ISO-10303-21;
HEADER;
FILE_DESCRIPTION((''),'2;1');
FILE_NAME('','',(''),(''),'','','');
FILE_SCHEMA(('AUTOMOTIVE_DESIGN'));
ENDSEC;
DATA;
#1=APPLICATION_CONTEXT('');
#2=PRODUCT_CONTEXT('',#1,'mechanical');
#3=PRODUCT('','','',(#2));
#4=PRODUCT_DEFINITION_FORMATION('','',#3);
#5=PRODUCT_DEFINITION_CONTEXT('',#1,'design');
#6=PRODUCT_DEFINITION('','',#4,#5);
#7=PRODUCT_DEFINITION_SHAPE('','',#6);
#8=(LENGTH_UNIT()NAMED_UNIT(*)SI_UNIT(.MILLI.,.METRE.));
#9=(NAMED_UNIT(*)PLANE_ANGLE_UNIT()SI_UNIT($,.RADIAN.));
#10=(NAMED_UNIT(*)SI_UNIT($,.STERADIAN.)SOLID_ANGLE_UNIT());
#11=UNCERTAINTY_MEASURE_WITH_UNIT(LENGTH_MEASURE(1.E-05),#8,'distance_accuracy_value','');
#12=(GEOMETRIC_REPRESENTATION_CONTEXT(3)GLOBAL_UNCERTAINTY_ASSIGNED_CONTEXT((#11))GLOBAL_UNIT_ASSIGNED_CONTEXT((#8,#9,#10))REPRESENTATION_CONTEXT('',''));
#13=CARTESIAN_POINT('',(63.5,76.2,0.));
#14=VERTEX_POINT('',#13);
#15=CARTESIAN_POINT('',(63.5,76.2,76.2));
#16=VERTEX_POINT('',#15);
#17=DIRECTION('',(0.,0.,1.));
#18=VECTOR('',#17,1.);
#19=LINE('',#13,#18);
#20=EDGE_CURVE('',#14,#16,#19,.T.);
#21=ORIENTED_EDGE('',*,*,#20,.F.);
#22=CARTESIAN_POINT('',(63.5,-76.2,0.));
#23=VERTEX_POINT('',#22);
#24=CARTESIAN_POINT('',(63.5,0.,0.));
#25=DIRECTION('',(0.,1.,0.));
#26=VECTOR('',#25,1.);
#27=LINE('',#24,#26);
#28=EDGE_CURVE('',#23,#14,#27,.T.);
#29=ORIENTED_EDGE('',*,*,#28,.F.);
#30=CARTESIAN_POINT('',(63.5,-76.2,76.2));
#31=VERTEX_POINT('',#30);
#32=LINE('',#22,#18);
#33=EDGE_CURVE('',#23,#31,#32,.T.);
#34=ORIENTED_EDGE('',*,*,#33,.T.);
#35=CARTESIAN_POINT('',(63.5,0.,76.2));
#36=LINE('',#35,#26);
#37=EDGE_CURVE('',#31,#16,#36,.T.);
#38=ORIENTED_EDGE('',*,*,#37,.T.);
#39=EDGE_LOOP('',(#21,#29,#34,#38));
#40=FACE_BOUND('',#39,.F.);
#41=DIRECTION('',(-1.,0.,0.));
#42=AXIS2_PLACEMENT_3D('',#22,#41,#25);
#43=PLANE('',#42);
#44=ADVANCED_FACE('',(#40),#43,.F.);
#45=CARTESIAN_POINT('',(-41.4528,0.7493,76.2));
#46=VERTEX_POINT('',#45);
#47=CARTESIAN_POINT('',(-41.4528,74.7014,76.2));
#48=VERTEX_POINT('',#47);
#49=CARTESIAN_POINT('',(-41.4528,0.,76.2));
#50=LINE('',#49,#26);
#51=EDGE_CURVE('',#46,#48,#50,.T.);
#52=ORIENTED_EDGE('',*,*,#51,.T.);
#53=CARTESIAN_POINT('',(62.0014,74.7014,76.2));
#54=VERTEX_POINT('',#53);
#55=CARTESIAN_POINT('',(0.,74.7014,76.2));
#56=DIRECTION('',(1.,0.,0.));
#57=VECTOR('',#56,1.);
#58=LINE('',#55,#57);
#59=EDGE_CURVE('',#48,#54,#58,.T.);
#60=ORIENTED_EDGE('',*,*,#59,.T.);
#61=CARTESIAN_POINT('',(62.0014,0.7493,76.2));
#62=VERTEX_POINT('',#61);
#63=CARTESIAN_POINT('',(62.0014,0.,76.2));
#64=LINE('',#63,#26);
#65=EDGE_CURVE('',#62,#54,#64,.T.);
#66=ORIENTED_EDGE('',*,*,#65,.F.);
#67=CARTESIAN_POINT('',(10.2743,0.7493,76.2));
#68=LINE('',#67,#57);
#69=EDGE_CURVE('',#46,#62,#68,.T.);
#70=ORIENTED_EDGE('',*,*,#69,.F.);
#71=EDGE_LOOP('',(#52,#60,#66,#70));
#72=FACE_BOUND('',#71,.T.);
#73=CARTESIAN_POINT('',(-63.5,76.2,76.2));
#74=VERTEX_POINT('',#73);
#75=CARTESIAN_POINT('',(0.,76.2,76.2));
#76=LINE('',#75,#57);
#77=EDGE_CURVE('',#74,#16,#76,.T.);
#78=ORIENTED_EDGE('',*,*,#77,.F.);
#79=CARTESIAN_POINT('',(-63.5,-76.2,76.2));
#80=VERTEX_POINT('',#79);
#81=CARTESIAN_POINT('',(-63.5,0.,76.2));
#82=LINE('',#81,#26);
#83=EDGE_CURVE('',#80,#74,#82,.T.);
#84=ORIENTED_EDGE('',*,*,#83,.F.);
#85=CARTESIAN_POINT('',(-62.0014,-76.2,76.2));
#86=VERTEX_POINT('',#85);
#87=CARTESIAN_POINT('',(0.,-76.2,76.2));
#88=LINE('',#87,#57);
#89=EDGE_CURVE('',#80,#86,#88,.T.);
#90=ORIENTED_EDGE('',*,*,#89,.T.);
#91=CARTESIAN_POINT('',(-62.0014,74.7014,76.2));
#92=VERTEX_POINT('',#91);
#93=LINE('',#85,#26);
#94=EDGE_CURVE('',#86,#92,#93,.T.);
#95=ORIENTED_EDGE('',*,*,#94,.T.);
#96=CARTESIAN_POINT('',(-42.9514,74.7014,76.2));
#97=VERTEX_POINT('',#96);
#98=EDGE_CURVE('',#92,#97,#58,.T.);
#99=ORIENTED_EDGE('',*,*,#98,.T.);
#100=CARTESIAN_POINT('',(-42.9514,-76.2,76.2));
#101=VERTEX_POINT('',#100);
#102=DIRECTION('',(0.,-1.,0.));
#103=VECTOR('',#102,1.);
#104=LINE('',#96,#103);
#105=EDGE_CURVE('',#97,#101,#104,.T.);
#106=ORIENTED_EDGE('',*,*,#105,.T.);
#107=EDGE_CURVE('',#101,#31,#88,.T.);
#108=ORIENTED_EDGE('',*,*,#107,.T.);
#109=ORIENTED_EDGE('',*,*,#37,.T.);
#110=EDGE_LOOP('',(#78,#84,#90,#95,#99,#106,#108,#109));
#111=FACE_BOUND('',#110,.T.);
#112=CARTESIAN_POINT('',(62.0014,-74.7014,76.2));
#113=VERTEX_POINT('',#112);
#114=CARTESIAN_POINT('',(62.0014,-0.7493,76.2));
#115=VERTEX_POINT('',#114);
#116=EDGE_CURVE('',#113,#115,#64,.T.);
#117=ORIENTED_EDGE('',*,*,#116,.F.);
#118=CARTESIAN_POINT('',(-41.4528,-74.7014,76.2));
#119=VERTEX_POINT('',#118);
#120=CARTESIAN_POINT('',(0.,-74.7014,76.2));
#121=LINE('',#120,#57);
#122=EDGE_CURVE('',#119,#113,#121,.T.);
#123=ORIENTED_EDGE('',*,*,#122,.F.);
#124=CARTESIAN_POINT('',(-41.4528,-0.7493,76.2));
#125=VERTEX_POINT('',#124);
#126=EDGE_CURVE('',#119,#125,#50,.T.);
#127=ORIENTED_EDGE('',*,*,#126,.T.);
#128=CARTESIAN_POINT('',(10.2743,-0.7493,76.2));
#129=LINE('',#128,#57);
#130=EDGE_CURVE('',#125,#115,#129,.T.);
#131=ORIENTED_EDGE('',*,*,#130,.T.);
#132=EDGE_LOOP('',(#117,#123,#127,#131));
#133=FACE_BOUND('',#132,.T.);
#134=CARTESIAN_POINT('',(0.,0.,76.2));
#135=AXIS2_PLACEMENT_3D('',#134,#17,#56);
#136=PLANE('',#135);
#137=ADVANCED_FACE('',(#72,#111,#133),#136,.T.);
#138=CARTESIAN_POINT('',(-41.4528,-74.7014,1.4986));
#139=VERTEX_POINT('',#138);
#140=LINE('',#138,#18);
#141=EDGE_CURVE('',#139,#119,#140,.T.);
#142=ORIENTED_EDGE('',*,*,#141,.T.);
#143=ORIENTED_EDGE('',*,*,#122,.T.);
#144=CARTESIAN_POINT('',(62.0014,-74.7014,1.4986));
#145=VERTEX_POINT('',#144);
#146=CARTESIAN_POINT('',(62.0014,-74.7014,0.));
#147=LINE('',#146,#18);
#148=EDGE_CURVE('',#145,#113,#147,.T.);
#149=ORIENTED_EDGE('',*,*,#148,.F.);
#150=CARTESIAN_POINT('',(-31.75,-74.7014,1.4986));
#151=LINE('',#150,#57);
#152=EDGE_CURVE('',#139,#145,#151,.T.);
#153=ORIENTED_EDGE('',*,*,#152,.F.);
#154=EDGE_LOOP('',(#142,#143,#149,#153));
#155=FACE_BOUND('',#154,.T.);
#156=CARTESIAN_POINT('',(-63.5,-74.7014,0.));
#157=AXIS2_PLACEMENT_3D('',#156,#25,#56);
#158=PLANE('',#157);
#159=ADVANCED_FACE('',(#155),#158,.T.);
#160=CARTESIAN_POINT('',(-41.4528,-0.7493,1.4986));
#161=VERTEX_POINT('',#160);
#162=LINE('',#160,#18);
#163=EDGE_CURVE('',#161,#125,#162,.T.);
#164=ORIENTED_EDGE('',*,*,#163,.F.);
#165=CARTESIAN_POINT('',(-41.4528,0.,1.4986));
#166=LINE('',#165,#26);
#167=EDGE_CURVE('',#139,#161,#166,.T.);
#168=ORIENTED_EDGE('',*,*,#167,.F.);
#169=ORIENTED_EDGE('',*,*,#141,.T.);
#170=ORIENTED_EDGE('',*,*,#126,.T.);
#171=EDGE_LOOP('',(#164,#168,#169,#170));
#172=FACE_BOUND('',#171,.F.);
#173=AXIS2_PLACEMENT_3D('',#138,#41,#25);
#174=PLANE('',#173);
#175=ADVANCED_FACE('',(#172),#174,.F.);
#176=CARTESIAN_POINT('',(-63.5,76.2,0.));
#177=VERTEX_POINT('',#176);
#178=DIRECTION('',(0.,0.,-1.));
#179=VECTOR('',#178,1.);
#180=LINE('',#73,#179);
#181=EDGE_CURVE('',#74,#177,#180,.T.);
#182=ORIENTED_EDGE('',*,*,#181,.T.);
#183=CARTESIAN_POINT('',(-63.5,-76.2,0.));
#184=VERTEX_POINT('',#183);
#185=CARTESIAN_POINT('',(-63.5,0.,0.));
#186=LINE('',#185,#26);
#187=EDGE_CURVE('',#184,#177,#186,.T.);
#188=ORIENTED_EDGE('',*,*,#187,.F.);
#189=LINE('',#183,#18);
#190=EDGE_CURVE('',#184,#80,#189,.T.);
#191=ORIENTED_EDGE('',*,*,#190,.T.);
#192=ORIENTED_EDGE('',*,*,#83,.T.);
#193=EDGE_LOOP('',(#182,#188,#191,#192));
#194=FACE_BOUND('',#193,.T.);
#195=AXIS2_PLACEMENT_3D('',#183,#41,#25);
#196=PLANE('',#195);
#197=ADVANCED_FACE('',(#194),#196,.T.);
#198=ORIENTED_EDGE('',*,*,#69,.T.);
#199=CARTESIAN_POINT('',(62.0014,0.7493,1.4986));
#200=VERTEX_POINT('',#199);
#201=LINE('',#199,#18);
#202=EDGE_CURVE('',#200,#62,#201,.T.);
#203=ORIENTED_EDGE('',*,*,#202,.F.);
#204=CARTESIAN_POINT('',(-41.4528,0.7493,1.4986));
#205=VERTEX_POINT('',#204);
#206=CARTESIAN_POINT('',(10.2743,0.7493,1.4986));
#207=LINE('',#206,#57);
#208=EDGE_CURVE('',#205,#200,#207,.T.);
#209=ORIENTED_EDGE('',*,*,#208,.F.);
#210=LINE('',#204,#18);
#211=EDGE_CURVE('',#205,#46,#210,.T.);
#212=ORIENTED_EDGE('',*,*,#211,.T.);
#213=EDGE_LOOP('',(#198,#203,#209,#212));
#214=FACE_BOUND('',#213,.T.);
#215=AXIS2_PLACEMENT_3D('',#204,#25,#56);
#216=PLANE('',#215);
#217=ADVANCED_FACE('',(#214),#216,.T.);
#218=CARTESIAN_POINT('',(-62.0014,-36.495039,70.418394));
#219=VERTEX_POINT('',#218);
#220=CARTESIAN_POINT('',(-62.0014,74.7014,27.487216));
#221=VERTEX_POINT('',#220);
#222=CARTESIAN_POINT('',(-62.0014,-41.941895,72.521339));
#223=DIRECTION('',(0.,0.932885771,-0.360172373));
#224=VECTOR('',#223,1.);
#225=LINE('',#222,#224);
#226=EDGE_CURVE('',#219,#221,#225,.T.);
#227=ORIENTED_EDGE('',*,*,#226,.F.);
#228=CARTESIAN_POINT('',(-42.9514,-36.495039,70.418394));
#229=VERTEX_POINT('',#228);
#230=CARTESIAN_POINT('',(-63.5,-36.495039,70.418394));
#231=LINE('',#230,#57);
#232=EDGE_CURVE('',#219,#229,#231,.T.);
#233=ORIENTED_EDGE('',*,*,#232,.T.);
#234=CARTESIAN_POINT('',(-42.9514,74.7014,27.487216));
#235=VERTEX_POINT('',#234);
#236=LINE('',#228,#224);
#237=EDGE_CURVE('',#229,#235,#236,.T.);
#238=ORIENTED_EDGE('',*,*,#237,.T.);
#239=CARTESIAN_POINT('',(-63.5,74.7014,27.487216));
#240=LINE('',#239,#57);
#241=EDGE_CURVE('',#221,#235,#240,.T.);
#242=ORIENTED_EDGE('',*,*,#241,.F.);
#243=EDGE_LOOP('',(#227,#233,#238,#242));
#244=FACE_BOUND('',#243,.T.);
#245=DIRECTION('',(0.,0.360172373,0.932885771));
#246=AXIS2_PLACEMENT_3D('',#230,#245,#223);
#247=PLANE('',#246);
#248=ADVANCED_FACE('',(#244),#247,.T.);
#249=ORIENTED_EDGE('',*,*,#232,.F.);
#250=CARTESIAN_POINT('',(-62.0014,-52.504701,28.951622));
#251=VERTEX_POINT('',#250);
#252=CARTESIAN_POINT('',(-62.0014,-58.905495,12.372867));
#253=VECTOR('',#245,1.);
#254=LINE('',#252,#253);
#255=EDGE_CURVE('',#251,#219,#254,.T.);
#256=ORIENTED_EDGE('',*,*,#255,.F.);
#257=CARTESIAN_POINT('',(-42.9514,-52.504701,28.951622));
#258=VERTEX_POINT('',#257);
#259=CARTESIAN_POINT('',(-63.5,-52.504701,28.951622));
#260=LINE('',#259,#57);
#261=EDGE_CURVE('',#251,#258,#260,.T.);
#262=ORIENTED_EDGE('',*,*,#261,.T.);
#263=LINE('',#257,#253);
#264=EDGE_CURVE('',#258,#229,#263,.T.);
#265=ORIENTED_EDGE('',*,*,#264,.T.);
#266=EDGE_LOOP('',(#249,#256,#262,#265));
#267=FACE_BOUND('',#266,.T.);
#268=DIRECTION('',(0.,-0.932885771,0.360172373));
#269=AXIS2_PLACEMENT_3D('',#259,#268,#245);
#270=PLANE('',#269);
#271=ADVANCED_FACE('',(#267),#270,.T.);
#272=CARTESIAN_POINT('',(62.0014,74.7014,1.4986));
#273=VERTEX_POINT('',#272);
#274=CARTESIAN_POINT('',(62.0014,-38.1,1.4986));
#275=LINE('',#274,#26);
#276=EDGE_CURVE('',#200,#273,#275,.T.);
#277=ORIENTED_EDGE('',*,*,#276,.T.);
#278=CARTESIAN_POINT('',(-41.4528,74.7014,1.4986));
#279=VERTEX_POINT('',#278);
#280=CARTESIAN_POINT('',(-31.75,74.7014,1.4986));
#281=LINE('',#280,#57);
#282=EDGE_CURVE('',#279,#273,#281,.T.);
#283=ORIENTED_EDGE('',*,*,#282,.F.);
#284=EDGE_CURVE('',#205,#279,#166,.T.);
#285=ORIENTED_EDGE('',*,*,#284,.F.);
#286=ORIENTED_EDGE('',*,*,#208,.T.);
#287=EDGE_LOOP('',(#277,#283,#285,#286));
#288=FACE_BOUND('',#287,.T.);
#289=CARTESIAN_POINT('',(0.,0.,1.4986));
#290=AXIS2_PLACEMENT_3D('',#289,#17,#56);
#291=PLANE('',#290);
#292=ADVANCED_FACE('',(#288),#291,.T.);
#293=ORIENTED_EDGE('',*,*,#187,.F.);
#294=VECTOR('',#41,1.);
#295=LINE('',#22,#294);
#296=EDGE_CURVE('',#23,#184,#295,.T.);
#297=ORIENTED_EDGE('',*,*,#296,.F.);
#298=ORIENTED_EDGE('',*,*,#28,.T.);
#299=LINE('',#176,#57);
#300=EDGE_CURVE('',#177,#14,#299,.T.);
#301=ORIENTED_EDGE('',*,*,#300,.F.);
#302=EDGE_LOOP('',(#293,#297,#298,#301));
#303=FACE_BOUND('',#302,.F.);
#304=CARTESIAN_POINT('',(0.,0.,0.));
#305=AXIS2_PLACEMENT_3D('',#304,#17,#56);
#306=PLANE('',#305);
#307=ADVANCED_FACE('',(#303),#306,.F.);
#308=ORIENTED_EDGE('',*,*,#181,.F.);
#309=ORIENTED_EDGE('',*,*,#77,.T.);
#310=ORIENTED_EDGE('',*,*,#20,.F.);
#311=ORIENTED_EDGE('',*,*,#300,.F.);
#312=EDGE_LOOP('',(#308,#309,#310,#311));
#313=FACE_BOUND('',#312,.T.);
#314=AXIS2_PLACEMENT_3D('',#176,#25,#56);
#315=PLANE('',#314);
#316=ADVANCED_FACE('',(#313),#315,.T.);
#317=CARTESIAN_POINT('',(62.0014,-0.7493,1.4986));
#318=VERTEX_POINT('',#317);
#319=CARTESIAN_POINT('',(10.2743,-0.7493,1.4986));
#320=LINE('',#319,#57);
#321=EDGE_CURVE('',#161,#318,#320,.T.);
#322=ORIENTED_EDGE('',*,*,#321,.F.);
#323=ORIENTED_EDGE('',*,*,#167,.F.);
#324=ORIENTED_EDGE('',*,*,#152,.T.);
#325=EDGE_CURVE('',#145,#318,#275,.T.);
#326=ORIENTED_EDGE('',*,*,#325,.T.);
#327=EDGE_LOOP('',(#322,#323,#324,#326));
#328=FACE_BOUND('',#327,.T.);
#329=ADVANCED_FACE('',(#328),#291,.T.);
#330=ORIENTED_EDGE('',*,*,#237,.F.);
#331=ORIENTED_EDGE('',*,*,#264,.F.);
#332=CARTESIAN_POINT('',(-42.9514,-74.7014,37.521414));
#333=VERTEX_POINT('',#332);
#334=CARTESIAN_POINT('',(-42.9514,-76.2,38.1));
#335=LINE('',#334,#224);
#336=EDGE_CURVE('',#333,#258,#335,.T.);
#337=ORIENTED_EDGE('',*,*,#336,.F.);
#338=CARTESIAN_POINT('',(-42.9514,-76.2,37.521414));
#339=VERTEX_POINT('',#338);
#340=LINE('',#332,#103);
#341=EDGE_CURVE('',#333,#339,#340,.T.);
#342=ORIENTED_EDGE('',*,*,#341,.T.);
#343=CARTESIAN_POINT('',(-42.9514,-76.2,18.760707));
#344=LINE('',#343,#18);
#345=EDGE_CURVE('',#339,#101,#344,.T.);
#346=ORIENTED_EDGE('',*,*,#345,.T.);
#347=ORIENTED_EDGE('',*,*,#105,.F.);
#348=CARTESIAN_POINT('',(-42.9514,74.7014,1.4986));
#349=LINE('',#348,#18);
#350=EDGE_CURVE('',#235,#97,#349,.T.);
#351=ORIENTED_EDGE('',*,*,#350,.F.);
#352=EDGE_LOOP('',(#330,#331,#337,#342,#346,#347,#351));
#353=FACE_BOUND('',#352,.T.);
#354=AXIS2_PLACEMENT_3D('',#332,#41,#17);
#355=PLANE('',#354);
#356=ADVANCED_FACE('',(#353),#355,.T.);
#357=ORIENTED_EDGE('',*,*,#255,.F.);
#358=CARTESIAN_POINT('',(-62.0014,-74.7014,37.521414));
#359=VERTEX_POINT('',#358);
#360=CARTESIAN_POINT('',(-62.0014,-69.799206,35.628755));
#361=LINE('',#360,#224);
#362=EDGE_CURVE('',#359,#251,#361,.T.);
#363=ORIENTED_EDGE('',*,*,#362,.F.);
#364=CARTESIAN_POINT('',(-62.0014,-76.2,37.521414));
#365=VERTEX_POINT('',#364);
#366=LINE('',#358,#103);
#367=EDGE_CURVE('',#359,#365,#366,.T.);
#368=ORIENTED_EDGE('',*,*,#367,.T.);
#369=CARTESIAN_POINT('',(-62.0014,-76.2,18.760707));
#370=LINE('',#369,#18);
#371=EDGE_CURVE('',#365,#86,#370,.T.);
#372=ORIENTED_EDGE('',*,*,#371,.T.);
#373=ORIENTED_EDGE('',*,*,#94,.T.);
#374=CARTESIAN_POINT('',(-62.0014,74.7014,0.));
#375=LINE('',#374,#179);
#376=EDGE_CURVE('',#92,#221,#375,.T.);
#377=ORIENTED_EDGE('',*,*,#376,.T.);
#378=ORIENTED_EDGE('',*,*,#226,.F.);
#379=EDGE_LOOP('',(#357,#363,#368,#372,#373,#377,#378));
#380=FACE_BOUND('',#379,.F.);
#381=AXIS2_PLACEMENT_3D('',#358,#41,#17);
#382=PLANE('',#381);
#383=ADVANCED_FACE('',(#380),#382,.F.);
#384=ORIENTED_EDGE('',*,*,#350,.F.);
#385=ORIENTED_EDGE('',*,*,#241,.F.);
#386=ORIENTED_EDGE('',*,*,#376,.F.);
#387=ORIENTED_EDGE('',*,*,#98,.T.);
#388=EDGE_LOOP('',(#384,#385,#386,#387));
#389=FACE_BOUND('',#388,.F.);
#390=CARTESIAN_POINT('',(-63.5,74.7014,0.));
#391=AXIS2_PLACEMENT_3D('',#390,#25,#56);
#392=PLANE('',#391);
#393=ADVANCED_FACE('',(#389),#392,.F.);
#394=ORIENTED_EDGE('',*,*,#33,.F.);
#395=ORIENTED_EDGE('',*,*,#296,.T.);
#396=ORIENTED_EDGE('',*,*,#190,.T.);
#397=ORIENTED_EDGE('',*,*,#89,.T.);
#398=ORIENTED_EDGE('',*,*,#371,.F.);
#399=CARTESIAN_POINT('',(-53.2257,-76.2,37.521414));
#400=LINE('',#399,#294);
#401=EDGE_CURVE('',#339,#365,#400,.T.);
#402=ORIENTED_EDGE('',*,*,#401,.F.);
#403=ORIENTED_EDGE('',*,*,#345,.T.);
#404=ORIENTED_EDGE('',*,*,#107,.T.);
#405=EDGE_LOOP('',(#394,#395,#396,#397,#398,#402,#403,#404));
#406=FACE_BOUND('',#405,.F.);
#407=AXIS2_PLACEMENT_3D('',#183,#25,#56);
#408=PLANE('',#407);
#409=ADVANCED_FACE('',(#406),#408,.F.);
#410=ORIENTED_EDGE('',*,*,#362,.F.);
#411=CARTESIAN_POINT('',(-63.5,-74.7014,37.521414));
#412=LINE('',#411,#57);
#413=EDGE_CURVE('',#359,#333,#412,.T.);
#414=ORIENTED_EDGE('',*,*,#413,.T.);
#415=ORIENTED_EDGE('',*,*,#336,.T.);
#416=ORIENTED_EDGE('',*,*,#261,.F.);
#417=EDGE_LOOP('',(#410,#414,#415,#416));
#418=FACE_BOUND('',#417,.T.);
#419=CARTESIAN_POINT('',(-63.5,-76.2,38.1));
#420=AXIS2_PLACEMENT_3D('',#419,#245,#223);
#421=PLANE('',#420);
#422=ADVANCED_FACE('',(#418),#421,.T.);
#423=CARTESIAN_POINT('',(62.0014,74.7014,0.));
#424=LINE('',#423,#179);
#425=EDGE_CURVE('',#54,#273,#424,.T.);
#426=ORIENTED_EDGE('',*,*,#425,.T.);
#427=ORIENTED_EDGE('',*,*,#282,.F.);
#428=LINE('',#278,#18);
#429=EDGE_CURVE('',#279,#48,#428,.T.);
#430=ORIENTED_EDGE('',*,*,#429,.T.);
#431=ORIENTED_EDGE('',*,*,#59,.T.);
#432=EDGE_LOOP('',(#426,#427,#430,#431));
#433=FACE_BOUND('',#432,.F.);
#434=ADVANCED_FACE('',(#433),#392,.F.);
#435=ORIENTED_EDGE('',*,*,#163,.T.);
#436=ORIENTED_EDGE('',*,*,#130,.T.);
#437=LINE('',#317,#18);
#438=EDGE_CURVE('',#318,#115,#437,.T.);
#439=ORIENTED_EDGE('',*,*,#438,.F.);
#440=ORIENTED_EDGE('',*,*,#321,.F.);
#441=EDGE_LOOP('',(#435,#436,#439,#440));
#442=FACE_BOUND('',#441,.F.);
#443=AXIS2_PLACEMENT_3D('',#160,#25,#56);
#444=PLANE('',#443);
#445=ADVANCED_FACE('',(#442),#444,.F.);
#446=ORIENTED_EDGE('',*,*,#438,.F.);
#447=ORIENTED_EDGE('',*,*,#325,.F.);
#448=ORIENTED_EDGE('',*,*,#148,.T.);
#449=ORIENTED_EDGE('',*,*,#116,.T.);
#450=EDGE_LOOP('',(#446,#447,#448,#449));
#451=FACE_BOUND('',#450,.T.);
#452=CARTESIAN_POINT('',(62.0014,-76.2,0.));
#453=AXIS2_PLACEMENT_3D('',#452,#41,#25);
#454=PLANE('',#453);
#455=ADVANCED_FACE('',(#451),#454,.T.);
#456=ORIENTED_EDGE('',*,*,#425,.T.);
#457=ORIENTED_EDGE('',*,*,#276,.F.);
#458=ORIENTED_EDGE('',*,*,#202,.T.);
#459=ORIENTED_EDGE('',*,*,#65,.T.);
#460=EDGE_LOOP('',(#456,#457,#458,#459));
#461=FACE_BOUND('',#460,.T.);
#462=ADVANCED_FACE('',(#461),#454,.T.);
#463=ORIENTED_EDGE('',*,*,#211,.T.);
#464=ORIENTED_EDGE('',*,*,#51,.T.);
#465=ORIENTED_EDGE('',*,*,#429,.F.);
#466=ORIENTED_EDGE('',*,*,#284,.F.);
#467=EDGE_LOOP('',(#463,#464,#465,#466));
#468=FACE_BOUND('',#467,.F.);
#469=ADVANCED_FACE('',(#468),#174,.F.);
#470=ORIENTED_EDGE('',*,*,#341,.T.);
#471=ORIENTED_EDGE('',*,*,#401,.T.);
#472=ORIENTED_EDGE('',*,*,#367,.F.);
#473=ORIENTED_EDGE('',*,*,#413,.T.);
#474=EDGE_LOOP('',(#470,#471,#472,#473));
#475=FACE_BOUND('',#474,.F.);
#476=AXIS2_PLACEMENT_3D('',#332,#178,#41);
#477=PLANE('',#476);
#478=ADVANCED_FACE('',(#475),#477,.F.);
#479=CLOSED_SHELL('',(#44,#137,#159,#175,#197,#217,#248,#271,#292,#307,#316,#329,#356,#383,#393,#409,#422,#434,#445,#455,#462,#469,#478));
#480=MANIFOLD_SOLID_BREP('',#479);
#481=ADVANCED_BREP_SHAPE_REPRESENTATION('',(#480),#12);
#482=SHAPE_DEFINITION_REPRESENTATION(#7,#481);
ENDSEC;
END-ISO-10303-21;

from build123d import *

# Parameters (mm, degrees)
F0_W      = 127
F0_H      = 152.4
F1_DEPTH  = 76.2
F2_T      = -1.4986
F3_W      = 1.4986
F3_H      = 149.4028
F4_DEPTH  = 74.7014
F5_W      = 103.4542
F5_H      = 1.4986
F6_DEPTH  = 74.7014
F8_DEPTH  = 20.5486
F9_W      = 19.05
F9_H      = 38.6785856472
F10_DEPTH = 4.064


# Not quite as in the source:
# - an extrude ends at something that could not be found from the text; its depth is read off the source's solid


with BuildPart() as f1:
    # F0 (on Top) → F1 (new body)
    with BuildSketch(Plane.XY):
        Rectangle(F0_W, F0_H)
    extrude(amount=F1_DEPTH)

    # F2
    f2_openings = [f1.faces().sort_by_distance(p)[0] for p in [
        (0, 0, 76.2),
    ]]
    offset(amount=F2_T, openings=f2_openings)

    # F3 (on face) → F4 (join, through all)
    with BuildSketch(Plane.XY.offset(1.4986)):
        with Locations((-42.2021, 0)):
            Rectangle(F3_W, F3_H)
    extrude(amount=F4_DEPTH)

    # F5 (on face) → F6 (join, through all)
    with BuildSketch(Plane.XY.offset(1.4986)):
        with Locations((10.2743, 0)):
            Rectangle(F5_W, F5_H)
    extrude(amount=F6_DEPTH)

    # F7 (on face) → F8 (join, through all)
    with BuildSketch(Plane(origin=(-63.5, 0, 0), x_dir=(0, -1, 0), z_dir=(-1, 0, 0))):
        Polygon((76.2, 0), (76.2, 38.1), (52.5047014133, 28.9516217345), (36.4950394487, 70.4183942612), (-76.2, 26.9086302568), (-76.2, 0), align=None)
    extrude(amount=-F8_DEPTH)

    # F9 (on face) → F10 (cut)
    with BuildSketch(Plane(origin=(0, -74.7014, 0), x_dir=(-1, 0, 0), z_dir=(0, 1, 0))):
        with Locations((52.4764, 56.8607071764)):
            Rectangle(F9_W, F9_H)
    extrude(amount=-F10_DEPTH, mode=Mode.SUBTRACT)


solid = f1.part
